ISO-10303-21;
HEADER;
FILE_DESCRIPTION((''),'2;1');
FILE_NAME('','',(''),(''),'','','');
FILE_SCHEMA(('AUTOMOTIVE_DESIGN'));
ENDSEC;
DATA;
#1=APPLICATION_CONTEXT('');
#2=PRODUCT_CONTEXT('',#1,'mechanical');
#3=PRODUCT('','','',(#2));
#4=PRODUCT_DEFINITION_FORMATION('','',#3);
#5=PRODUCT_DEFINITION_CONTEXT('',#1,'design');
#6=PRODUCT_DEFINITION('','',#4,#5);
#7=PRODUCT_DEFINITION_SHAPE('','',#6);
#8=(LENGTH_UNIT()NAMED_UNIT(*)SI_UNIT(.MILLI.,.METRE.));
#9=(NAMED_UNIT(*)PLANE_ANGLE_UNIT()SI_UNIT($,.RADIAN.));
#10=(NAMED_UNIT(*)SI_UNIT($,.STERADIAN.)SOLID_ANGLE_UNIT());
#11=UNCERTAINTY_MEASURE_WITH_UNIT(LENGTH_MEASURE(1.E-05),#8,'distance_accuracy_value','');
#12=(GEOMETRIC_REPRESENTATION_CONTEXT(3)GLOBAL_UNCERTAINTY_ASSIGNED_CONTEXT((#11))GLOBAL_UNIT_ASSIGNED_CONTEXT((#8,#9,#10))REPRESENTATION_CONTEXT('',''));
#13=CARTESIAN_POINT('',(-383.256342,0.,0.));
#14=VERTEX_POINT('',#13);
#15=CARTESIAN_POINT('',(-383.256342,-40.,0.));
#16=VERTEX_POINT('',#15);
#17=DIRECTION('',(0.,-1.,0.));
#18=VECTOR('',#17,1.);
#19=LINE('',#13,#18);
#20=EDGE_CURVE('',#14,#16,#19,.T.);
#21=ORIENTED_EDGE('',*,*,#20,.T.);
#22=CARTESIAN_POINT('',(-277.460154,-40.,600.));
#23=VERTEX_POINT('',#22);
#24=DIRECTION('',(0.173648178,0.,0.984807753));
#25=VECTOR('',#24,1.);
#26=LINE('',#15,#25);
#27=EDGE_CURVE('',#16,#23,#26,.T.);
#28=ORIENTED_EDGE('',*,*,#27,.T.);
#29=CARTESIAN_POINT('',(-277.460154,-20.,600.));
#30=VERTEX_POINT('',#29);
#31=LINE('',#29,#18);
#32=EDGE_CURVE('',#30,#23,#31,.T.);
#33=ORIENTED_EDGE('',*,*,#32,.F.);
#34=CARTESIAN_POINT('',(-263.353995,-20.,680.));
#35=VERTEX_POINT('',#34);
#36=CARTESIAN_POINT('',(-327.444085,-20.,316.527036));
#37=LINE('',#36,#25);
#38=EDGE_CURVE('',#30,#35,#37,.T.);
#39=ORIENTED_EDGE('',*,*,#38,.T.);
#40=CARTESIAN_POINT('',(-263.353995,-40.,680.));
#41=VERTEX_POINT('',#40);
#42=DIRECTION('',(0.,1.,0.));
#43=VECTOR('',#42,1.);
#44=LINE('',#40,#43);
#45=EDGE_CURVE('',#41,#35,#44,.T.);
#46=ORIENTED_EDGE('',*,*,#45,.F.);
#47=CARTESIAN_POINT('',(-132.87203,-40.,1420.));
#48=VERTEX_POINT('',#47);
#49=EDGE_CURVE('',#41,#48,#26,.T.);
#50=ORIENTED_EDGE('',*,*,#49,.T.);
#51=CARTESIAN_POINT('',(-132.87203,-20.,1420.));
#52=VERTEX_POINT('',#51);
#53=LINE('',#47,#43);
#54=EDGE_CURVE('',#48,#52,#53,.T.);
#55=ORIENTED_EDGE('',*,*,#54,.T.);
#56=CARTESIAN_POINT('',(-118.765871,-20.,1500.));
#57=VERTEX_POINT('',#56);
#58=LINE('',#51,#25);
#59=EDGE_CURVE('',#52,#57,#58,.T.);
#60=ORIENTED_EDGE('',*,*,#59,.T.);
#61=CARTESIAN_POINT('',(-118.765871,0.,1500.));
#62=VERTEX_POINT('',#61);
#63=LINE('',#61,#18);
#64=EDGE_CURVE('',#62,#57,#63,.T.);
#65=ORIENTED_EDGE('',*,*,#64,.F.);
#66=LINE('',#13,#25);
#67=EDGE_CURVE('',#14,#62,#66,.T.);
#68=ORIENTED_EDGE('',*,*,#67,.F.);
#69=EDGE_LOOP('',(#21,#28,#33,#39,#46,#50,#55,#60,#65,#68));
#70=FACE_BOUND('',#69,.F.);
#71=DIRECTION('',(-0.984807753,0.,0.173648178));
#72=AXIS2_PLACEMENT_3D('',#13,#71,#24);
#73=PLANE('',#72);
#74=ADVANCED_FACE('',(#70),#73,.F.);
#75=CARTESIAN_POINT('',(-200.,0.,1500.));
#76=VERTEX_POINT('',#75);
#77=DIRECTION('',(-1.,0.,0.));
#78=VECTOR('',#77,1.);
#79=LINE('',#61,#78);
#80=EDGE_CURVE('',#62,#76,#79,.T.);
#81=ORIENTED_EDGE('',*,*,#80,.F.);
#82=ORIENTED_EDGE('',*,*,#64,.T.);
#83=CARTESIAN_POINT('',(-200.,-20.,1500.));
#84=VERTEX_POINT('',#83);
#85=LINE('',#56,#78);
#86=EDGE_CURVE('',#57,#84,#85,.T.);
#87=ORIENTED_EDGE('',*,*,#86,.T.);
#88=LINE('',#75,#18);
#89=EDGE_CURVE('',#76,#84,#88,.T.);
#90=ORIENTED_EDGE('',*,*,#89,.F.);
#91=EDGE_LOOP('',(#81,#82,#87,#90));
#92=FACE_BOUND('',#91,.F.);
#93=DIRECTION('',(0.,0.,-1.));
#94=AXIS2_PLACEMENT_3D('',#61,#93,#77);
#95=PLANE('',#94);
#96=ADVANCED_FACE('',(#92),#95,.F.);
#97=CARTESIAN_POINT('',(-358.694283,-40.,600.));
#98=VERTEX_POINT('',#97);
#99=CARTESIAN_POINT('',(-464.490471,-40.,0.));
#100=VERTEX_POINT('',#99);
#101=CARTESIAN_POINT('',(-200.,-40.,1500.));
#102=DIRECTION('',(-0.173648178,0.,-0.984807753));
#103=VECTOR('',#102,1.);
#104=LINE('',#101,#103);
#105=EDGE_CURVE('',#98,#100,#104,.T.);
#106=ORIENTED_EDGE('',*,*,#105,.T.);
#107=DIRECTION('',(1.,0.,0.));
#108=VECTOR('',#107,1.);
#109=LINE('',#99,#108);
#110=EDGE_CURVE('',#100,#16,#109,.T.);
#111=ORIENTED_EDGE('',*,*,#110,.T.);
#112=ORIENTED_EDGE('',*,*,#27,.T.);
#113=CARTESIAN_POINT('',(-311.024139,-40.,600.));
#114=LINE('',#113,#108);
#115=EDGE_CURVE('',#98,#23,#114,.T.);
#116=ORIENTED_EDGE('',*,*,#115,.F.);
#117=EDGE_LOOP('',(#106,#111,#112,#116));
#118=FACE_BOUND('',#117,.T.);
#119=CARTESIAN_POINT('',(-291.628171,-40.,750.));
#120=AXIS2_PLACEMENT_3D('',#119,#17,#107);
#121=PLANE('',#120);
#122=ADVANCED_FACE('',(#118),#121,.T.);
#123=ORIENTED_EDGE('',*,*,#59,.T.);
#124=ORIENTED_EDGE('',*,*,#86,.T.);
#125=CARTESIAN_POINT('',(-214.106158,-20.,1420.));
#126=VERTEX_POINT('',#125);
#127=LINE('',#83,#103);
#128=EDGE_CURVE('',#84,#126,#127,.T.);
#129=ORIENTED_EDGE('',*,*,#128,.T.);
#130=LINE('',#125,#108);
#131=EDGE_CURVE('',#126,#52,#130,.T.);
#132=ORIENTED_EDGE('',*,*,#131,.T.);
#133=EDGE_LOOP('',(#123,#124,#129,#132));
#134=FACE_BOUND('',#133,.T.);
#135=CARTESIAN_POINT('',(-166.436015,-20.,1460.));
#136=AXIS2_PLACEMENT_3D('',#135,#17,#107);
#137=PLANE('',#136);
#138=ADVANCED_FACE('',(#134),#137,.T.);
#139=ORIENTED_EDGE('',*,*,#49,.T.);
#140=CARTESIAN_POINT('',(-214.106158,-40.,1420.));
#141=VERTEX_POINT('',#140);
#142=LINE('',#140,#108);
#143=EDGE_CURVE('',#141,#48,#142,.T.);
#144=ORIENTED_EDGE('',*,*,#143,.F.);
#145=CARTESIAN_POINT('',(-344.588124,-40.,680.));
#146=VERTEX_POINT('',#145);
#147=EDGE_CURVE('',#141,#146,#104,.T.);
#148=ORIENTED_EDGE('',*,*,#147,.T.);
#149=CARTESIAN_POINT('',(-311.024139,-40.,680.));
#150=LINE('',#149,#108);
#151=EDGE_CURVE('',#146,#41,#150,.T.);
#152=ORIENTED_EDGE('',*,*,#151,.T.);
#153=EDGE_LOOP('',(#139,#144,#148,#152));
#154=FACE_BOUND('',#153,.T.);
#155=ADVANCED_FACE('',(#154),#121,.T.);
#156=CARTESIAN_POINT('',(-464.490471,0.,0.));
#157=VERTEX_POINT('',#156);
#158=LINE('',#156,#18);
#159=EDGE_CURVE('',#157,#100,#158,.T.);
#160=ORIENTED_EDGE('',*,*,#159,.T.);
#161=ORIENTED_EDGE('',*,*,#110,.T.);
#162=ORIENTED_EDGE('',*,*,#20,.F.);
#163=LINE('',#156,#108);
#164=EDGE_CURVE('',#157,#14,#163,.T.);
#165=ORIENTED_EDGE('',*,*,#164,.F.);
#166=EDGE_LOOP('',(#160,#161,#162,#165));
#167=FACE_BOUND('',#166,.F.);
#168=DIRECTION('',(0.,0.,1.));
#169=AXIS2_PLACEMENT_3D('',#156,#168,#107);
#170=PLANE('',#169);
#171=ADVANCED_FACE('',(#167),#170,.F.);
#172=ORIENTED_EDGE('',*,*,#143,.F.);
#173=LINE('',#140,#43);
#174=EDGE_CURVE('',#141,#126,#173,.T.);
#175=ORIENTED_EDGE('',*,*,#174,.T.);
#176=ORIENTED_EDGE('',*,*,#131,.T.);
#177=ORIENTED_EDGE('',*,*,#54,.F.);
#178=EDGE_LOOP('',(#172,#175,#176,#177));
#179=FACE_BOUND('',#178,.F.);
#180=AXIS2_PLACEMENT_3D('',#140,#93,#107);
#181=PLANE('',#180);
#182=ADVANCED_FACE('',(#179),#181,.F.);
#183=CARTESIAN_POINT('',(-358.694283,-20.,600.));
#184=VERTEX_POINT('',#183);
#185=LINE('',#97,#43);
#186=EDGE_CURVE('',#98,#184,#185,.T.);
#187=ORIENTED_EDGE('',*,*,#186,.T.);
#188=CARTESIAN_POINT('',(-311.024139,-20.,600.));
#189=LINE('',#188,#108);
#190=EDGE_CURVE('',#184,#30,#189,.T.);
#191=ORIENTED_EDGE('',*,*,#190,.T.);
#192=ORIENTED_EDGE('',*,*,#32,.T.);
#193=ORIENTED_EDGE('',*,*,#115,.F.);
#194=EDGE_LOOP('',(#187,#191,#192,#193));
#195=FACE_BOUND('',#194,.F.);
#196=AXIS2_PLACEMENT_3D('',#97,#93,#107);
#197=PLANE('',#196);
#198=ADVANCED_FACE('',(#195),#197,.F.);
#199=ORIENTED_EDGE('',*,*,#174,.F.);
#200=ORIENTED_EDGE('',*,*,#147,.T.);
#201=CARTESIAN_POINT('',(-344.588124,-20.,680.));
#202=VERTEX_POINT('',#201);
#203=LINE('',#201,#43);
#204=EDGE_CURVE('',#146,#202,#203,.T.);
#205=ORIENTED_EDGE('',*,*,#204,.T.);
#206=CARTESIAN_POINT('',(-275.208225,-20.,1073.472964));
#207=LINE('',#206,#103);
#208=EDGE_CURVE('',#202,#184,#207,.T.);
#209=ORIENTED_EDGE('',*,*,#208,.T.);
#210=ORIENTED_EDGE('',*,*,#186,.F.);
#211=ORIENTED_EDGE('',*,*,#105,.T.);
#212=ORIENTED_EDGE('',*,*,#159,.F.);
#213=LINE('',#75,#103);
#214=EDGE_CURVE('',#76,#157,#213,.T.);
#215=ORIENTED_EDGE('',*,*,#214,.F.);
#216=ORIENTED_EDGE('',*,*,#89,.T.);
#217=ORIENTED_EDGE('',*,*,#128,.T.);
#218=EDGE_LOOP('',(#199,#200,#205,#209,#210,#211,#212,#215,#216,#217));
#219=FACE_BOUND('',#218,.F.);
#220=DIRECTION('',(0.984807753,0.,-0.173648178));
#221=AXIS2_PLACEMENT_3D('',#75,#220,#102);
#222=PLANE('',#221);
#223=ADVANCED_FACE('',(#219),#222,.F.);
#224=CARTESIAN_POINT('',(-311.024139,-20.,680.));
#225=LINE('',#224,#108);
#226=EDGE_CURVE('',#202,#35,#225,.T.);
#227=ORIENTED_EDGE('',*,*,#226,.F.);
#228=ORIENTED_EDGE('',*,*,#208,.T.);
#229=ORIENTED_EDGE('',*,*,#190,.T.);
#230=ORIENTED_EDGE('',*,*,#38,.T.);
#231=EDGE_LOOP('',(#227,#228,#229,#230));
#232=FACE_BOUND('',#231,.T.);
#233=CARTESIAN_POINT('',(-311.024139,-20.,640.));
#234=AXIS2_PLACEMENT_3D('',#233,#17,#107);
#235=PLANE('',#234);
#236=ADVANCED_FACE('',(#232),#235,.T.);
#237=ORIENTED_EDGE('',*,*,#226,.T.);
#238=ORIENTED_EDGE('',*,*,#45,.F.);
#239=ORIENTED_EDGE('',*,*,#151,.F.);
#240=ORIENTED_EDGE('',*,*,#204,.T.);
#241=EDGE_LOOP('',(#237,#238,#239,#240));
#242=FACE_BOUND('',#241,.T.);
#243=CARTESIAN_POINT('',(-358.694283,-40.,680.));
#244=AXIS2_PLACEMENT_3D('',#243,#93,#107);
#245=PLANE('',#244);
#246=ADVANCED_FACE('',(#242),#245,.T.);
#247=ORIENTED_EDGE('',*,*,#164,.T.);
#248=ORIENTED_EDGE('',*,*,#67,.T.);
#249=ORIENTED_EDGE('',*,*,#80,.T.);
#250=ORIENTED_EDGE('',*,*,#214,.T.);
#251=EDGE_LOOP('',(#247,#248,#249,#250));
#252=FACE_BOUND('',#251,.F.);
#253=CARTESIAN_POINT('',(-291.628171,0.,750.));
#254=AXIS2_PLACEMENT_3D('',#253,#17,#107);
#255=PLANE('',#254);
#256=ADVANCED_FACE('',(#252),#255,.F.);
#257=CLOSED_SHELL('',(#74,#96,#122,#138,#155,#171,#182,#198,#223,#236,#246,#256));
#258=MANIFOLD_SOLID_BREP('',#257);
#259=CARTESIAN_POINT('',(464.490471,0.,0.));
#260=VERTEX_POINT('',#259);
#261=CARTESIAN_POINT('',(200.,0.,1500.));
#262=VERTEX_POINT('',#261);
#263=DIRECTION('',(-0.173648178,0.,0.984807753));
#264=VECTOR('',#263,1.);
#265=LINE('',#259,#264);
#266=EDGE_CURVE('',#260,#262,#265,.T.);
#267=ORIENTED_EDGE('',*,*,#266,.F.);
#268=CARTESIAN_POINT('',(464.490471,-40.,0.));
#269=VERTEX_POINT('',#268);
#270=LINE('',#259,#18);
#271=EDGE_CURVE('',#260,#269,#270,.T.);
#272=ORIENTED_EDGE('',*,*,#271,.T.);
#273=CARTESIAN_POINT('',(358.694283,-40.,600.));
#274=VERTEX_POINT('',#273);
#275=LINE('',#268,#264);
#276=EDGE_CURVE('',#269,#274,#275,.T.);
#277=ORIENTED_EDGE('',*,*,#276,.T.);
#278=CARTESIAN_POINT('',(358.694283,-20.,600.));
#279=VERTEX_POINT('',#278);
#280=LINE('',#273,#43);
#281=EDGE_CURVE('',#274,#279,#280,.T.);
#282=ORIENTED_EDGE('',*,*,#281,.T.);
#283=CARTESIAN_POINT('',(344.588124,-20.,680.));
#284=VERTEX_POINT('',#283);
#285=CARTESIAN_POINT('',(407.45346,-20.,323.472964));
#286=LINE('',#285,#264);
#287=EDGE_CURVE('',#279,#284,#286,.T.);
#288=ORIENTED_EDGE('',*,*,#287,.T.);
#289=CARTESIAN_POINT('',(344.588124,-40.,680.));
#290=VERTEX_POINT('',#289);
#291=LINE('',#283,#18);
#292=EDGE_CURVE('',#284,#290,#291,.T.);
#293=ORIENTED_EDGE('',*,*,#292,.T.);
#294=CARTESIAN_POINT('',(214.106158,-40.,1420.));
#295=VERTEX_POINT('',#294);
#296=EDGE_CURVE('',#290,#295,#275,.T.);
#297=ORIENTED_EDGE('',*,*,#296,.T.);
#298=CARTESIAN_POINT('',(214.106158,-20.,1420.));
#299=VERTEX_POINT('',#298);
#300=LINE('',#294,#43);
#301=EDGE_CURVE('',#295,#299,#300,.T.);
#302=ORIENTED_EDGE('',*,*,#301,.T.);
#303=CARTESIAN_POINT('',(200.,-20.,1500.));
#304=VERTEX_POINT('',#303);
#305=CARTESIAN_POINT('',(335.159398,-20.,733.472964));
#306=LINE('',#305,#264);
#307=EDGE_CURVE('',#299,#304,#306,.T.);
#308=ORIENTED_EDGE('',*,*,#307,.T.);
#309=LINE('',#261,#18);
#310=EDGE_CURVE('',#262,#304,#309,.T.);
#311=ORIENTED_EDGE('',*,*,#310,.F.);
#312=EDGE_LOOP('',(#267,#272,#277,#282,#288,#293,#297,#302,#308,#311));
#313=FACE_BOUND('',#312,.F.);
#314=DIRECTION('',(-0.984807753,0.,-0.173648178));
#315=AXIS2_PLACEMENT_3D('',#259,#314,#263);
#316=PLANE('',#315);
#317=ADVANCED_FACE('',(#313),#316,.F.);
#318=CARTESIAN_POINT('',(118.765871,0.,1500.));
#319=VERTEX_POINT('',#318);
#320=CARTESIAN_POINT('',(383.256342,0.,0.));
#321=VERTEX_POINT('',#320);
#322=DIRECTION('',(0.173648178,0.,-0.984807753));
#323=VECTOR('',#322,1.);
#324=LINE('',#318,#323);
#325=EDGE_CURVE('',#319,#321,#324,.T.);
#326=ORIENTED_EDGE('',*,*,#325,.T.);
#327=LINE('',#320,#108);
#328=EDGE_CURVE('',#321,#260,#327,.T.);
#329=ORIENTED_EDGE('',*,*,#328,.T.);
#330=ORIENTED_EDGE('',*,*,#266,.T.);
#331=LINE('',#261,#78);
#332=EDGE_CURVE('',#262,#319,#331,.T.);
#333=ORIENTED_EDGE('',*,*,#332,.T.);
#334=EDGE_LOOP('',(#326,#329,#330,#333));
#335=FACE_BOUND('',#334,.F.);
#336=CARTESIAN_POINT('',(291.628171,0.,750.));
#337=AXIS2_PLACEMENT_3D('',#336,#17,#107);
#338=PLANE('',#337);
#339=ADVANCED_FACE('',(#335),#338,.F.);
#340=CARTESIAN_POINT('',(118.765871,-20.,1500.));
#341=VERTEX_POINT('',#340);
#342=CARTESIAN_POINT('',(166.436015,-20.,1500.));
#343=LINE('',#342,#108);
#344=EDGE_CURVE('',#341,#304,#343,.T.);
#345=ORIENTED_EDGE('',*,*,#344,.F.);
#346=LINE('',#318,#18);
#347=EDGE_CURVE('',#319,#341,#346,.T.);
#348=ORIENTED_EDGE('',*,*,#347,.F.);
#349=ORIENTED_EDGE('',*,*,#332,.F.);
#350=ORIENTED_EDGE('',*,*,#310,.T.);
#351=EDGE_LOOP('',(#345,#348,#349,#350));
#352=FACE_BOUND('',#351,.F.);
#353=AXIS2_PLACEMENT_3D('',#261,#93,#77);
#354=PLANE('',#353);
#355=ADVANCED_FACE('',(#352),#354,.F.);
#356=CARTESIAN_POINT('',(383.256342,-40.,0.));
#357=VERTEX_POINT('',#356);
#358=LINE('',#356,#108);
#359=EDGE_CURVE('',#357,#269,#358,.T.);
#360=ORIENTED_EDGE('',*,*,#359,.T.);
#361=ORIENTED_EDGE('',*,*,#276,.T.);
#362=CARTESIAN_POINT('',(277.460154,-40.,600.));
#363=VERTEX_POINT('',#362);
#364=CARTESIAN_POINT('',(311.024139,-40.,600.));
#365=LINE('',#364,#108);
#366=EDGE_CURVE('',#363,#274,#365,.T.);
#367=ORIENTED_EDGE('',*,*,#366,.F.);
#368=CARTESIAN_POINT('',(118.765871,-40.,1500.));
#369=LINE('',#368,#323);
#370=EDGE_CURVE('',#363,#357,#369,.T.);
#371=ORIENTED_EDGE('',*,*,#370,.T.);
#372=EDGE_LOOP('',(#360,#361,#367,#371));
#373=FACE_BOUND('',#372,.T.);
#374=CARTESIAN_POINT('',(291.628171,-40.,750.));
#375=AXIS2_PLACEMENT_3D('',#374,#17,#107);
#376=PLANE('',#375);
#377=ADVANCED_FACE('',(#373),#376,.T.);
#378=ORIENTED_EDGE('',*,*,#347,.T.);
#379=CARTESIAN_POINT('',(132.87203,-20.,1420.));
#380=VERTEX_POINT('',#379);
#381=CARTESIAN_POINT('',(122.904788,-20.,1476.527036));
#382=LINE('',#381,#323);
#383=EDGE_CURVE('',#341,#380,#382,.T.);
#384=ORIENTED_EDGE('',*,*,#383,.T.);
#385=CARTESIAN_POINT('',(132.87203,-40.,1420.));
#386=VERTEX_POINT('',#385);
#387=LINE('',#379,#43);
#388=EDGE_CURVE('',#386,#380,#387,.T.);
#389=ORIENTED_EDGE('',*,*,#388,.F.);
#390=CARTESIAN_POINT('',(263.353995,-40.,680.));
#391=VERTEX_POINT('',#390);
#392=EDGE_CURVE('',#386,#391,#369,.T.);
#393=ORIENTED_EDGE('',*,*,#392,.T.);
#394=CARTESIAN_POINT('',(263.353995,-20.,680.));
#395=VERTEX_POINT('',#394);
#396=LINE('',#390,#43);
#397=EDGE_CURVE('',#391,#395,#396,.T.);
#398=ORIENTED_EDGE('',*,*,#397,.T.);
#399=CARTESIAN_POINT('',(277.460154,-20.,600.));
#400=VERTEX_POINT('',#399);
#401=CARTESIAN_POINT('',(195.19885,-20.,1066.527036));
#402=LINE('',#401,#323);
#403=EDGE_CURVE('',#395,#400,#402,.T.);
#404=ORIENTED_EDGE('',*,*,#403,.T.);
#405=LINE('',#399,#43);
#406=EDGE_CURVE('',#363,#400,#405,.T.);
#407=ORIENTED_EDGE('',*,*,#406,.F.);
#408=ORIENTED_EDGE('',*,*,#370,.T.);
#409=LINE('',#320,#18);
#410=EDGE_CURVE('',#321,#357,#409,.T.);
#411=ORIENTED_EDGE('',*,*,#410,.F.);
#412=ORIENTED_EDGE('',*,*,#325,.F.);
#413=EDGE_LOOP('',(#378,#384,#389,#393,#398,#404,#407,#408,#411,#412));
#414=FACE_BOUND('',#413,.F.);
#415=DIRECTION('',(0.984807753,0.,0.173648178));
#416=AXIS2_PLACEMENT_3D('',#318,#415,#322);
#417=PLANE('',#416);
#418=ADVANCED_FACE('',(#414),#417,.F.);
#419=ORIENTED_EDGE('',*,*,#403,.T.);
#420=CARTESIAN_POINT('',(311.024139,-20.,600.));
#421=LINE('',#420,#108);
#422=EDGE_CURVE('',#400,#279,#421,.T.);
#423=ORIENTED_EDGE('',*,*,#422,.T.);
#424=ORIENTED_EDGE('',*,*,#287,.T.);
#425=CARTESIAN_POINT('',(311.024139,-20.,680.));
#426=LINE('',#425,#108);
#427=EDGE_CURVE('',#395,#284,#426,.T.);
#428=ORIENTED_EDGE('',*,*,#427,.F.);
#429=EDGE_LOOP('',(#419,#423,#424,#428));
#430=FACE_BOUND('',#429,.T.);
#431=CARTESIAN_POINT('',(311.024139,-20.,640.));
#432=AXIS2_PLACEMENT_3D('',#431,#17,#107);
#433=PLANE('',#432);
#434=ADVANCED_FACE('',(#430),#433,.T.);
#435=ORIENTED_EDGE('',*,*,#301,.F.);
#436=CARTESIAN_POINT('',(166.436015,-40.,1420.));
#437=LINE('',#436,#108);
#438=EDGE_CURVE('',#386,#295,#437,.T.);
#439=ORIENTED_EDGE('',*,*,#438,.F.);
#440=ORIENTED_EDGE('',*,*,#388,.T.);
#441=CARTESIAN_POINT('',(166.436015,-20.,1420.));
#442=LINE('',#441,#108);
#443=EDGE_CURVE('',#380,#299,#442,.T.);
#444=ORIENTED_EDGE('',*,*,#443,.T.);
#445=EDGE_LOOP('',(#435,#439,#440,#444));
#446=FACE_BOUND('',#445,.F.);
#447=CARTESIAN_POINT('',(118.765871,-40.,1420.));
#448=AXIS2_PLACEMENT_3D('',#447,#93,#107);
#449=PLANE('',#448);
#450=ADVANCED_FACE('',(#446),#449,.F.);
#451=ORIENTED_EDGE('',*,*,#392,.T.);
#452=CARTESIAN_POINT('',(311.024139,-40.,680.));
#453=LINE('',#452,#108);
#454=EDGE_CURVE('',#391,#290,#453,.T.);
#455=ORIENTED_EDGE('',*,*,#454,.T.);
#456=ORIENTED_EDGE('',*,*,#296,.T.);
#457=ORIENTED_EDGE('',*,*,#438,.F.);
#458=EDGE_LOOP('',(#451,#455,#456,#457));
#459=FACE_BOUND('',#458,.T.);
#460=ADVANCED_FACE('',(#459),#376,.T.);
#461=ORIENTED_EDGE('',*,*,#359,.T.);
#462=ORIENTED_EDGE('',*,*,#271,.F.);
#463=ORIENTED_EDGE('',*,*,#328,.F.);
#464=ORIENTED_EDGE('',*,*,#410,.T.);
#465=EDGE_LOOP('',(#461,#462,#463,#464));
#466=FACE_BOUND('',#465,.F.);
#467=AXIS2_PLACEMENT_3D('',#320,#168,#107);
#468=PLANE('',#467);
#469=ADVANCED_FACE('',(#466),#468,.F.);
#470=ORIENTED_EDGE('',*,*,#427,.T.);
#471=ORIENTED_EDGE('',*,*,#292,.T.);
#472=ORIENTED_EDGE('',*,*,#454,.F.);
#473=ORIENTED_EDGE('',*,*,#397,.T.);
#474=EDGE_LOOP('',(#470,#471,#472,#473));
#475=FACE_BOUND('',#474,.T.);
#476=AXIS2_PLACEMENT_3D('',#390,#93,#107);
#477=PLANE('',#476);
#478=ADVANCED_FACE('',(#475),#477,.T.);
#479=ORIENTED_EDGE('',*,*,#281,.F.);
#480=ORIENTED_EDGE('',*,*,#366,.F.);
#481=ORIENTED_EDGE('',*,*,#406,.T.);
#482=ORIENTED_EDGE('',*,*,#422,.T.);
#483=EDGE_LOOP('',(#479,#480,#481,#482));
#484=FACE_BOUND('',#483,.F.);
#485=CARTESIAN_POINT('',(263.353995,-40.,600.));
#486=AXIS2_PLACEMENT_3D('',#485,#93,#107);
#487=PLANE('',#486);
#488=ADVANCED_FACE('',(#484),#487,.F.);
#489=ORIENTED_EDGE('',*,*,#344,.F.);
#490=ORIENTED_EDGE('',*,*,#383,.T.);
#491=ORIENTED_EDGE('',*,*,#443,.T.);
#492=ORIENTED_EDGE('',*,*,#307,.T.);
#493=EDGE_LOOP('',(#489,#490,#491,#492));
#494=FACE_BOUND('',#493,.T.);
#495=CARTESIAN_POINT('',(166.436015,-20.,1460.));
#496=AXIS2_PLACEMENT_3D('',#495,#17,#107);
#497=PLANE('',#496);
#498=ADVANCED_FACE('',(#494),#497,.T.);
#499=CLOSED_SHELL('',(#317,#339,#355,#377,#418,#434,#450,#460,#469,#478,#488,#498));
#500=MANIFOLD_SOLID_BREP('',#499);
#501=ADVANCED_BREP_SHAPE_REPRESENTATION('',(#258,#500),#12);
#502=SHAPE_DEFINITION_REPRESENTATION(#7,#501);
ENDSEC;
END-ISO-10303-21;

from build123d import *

# Parameters (mm, degrees)
F2_DEPTH = 40
F3_W     = 95.3402874075
F3_H     = 80
F4_DEPTH = 20
F5_DEPTH = 20
F6_W     = 95.3402874075
F6_H     = 80
F7_DEPTH = 20


with BuildPart() as f2:
    # F1 (on Front) → F2 (new body)
    with BuildSketch(Plane.XZ):
        Polygon((-118.7658710491, 1500), (-200, 1500), (-464.4904710627, 0), (-383.2563421118, 0), align=None)
    extrude(amount=F2_DEPTH)

    # F3 (on face) → F4 (cut)
    with BuildSketch(Plane.XZ.offset(40)):
        Polygon((-118.7658710491, 1500), (-200, 1500), (-214.1061584567, 1420), (-132.8720295058, 1420), align=None)
        with Locations((-311.0241389339, 640)):
            Rectangle(F3_W, F3_H)
    extrude(amount=-F4_DEPTH, mode=Mode.SUBTRACT)

    # F3 (on face) → F5 (cut)
    with BuildSketch(Plane.XZ.offset(40)):
        Polygon((-118.7658710491, 1500), (-200, 1500), (-214.1061584567, 1420), (-132.8720295058, 1420), align=None)
        with Locations((-311.0241389339, 640)):
            Rectangle(F3_W, F3_H)
    extrude(amount=-F5_DEPTH, mode=Mode.SUBTRACT)


with BuildPart() as f2b:
    # F1 (on Front) → F2, piece 2 (new body)
    with BuildSketch(Plane.XZ):
        Polygon((118.7658710491, 1500), (383.2563421118, 0), (464.4904710627, 0), (200, 1500), align=None)
    extrude(amount=F2_DEPTH)

    # F6 (on face) → F7 (cut)
    with BuildSketch(Plane.XZ.offset(40)):
        with Locations((166.4360147529, 1460)):
            Rectangle(F6_W, F6_H)
        with Locations((311.0241389339, 640)):
            Rectangle(F6_W, F6_H)
    extrude(amount=-F7_DEPTH, mode=Mode.SUBTRACT)


solid = Compound([f2.part, f2b.part])
